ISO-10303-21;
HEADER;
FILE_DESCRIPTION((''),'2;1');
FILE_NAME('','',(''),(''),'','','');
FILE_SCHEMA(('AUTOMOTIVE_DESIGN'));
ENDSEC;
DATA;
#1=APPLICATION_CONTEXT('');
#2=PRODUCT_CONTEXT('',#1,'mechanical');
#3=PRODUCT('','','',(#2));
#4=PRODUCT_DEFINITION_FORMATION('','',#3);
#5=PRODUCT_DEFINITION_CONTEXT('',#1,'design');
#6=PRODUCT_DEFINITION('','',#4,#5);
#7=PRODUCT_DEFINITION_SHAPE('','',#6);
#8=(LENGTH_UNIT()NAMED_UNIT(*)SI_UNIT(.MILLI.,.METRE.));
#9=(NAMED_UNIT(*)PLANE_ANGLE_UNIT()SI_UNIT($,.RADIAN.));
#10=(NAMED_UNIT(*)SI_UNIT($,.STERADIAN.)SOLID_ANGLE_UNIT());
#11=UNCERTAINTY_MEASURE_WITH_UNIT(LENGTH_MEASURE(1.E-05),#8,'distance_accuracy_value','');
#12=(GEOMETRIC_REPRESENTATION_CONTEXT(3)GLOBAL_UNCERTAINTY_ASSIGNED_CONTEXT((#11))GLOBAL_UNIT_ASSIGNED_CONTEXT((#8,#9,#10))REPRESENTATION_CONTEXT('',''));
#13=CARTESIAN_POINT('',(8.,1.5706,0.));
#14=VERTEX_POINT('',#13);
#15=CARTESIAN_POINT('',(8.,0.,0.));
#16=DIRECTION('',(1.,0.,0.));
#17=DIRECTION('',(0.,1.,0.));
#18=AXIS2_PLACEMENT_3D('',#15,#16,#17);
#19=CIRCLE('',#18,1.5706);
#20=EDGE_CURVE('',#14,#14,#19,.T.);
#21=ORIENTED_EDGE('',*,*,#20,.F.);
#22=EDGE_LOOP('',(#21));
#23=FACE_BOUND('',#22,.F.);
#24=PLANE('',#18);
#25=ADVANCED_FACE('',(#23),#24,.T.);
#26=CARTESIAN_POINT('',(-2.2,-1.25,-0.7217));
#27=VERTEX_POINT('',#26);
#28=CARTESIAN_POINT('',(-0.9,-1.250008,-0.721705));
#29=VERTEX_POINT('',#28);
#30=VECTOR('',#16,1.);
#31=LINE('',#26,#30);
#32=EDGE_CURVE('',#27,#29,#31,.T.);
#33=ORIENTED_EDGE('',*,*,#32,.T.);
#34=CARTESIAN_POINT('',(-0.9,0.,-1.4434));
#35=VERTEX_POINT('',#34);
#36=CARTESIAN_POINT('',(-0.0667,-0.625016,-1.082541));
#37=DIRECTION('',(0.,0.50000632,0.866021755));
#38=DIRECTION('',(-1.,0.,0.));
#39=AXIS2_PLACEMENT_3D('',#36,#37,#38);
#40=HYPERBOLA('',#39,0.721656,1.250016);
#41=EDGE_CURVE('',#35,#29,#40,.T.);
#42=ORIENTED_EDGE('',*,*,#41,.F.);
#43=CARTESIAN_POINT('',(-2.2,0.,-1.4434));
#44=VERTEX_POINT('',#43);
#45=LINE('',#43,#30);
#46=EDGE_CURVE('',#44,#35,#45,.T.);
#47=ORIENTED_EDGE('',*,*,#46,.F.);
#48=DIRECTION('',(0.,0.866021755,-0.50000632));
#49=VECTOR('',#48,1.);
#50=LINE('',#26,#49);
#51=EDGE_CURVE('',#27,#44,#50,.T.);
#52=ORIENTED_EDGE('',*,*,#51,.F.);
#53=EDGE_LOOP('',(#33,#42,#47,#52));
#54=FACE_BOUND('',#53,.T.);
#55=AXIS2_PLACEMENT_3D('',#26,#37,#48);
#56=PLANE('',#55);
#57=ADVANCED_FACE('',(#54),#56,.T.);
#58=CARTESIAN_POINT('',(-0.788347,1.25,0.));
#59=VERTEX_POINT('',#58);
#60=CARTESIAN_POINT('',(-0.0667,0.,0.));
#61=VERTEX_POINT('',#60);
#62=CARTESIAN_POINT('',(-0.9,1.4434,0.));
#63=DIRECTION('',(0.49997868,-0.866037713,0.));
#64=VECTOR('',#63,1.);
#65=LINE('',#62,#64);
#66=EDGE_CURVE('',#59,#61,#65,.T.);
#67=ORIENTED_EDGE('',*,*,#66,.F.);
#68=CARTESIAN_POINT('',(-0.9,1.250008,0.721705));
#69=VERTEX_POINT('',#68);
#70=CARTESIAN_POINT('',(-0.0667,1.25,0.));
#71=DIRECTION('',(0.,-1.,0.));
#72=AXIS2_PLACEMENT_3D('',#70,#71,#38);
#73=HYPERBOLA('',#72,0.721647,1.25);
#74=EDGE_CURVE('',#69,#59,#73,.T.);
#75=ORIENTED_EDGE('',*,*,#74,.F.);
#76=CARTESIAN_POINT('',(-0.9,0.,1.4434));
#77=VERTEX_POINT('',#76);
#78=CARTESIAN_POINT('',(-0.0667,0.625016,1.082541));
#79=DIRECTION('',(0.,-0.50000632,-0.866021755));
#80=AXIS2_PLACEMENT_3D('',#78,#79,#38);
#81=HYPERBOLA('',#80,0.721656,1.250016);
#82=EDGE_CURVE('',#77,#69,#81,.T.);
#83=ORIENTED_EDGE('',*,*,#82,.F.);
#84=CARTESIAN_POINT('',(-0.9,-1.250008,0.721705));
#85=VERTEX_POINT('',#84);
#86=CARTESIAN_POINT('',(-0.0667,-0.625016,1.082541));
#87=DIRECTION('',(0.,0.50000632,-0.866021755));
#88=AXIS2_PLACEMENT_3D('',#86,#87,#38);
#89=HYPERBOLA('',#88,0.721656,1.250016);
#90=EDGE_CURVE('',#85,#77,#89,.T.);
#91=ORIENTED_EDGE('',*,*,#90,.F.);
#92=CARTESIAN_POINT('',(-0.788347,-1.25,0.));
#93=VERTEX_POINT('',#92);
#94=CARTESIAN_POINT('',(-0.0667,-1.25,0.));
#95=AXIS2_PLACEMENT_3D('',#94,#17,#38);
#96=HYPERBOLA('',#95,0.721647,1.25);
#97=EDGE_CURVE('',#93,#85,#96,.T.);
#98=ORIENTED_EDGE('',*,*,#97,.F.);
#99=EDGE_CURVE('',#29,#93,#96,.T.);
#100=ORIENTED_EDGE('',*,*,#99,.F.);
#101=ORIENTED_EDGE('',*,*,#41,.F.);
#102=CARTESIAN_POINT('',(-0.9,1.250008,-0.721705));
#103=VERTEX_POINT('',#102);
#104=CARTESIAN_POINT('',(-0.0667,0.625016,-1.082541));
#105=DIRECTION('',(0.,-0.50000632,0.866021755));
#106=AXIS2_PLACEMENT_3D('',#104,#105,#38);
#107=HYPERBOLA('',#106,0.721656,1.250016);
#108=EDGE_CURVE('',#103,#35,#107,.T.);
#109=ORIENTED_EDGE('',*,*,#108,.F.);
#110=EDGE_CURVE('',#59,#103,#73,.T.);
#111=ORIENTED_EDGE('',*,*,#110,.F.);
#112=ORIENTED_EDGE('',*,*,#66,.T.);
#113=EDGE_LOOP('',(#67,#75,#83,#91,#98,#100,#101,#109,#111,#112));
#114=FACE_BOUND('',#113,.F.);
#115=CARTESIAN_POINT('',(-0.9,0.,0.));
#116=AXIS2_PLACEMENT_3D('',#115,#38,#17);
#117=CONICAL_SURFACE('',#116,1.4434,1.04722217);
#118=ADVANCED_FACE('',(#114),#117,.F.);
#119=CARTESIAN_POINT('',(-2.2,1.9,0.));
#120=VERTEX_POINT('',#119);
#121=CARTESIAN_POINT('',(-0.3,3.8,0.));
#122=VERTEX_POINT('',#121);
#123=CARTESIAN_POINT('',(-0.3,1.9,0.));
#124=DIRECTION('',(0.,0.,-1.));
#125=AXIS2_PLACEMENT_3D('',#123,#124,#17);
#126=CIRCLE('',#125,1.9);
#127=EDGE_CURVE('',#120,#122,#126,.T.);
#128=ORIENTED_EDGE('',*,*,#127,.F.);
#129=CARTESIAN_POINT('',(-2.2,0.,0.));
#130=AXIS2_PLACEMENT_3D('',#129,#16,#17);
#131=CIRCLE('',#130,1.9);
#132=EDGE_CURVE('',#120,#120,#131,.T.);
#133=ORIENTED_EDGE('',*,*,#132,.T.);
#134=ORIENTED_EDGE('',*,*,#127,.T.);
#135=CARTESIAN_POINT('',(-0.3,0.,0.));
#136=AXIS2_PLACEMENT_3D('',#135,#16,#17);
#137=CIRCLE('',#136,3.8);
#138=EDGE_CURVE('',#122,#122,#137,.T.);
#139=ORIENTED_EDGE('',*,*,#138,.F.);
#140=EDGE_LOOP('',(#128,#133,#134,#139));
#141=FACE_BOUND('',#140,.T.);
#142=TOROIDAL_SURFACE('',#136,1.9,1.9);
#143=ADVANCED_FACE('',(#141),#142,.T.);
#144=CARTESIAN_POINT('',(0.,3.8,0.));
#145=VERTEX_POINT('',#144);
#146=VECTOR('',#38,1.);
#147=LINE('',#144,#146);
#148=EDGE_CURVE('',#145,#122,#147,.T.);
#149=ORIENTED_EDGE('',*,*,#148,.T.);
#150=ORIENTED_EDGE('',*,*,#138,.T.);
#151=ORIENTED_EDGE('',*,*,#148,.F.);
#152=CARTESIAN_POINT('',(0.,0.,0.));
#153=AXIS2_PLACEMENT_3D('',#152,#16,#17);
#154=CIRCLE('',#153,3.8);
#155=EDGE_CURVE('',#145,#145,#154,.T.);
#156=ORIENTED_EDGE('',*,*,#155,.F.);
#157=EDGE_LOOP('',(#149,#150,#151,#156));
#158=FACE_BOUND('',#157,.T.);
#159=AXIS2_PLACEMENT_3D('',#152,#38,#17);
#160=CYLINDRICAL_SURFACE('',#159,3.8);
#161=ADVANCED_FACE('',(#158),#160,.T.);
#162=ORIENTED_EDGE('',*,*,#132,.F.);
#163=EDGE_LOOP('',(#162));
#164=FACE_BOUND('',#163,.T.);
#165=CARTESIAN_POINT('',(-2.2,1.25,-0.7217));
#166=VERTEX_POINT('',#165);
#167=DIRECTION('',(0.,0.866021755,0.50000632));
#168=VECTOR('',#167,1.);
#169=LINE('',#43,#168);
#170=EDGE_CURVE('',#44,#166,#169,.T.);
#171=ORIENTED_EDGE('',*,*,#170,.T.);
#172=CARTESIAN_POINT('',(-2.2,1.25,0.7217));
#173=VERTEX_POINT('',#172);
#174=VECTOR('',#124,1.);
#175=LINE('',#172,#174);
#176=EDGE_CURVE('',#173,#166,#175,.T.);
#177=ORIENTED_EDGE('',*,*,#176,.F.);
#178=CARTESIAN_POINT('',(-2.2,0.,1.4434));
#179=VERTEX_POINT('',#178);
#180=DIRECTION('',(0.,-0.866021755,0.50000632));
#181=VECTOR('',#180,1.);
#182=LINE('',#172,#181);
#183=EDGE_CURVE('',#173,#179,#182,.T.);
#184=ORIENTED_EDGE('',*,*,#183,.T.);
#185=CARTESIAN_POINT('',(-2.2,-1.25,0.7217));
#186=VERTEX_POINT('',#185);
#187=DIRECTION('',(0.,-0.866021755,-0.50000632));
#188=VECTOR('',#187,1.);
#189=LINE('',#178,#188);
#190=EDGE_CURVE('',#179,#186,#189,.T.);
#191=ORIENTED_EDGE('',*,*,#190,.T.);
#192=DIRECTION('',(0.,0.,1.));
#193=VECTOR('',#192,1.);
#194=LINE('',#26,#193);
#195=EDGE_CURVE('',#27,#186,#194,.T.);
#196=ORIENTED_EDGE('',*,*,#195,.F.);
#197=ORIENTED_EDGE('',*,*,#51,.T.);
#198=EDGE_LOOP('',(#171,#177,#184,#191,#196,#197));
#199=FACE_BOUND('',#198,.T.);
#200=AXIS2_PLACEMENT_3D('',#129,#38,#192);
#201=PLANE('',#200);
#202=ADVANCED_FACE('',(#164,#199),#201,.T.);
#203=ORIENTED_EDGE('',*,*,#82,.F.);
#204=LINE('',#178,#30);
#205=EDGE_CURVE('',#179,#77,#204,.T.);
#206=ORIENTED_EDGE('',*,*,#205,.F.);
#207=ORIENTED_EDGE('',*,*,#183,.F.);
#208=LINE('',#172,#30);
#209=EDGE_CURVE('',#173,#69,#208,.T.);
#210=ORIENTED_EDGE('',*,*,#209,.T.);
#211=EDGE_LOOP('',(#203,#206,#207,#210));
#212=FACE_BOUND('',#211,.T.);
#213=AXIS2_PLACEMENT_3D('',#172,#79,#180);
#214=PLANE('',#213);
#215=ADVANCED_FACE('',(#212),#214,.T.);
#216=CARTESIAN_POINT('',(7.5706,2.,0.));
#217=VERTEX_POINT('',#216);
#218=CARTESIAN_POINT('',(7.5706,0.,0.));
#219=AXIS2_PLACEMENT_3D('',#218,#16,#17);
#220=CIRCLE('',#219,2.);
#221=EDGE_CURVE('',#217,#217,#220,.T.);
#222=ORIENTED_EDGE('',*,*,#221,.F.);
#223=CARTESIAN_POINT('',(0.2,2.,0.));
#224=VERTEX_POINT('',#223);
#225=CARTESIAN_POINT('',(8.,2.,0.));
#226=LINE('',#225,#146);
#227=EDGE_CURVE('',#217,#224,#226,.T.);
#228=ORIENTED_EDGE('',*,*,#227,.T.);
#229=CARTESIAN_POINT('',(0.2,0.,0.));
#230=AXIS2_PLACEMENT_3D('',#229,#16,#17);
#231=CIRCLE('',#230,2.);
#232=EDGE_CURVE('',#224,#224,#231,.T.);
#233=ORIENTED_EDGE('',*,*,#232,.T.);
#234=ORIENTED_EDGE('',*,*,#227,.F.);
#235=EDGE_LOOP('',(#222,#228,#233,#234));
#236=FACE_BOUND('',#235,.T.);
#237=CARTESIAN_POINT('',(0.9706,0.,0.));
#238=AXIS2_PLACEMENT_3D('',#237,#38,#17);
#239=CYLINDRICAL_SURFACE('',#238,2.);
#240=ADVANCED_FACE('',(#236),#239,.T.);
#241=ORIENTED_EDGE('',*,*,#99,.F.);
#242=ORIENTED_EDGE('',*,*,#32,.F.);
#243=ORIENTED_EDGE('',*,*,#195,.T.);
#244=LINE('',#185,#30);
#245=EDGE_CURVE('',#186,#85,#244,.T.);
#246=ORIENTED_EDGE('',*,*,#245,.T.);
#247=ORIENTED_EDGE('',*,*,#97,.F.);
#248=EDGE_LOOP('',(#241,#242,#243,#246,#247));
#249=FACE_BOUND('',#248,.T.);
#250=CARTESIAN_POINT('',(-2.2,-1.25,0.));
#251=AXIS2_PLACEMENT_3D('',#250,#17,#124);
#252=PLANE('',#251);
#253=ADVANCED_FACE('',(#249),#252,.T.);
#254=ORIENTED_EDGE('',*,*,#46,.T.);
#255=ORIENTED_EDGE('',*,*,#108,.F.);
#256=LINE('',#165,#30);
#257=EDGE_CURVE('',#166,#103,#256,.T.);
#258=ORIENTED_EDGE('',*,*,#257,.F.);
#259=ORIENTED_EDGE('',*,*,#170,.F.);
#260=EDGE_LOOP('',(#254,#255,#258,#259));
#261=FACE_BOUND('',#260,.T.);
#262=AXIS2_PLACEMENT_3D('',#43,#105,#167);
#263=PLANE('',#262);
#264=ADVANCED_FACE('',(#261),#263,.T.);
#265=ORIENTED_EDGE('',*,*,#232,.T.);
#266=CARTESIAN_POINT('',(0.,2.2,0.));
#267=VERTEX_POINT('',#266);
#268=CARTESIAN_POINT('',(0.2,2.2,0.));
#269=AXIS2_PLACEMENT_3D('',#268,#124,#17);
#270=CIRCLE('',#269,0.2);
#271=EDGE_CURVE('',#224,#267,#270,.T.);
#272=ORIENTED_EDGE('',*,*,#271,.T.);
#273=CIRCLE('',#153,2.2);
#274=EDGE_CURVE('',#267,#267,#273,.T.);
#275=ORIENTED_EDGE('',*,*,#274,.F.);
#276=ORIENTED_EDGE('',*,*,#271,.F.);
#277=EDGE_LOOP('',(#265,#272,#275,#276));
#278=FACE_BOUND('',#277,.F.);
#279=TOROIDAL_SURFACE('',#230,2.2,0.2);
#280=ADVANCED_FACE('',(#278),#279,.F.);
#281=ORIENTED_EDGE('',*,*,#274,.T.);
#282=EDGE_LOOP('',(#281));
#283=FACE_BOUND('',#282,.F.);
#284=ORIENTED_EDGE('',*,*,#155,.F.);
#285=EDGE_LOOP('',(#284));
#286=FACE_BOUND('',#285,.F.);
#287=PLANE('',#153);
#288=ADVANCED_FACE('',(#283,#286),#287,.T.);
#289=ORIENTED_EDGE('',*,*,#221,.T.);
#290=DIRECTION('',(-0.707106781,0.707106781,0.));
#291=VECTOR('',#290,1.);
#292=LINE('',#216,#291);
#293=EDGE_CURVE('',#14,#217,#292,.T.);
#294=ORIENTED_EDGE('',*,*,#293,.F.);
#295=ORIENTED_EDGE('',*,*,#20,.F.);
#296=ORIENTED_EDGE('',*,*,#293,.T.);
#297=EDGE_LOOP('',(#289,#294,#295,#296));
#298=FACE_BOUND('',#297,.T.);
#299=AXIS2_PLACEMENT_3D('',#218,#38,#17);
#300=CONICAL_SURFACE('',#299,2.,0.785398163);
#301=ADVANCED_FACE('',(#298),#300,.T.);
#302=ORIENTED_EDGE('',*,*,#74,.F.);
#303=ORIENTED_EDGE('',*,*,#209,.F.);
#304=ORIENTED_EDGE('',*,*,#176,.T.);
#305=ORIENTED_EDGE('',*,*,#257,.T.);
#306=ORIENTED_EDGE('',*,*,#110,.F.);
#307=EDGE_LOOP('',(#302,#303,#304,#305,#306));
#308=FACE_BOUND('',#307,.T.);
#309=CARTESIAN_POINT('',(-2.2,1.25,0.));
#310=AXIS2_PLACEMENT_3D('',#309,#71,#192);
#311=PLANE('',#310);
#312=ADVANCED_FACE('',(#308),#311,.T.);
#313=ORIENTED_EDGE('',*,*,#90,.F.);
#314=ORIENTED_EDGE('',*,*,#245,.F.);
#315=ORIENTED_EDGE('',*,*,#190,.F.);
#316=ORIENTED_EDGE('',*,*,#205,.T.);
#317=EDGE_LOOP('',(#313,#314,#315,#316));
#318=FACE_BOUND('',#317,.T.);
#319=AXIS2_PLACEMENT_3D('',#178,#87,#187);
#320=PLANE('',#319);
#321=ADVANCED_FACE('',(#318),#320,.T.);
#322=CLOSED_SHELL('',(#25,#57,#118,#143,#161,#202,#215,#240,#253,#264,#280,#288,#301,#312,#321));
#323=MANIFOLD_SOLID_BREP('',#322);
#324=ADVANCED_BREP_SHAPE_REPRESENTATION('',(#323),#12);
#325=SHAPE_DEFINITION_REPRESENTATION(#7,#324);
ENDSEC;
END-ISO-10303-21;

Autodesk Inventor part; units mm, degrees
ref_plane "YZ Plane" through (0, 0, 0) normal (1, 0, 0) x (0, 1, 0)
ref_plane "XZ Plane" through (0, 0, 0) normal (0, 1, 0) x (-1, 0, 0)
sketch "Sketch1" plane through (0, 0, 0) normal (0, 0, 1) x (1, 0, 0)
  line L0 (-0.0667, 0) -> (8, 0)
  line L1 (8, 0) -> (8, 2)
  line L2 (8, 2) -> (1.4, 2)
  line L3 (1.4, 2) -> (0.9706, 2)
  line L4 (0.9706, 2) -> (0, 2)
  line L5 (0, 2) -> (0, 3.8)
  line L6 (0, 3.8) -> (-2.2, 3.8)
  line L7 (-2.2, 3.8) -> (-2.2, 1.4434)
  line L8 (-2.2, 1.4434) -> (-0.9, 1.4434)
  line L9 (-0.9, 1.4434) -> (-0.0667, 0)
  line L10 (-4.24, 0) -> (10.04, 0) projected
  line L11 (0, -0.76) -> (0, 4.56) projected
  line L12 (1.4, 2) -> (0, 2) construction
  dimension "d0" = 6.6
  dimension "d1" = 0.4294
  dimension "d2" = 2.2
  dimension "d3" = 1.3
  dimension "d4" = 60
  dimension "d5" = 4
  dimension "d6" = 4
  dimension "d7" = 2.8868
  dimension "d8" = 7.6
  dimension "d19" = 8
revolve "Body" add sketch "Sketch1" angle 360 about axis through (-0.0667, 0, 0) along (1, 0, 0)
sketch "Sketch2" plane through (-2.2, 0, 0) normal (-1, 0, 0) x (0, 0, 1)
  circle A0 centre (0, 0) radius 1.4434 projected
  line L0 (0, -5.32) -> (0, 5.32) projected
  line L1 (-5.32, 0) -> (5.32, 0) projected
  line L2 (1.4434, 0) -> (0.7217, -1.25)
  line L3 (0.7217, -1.25) -> (-0.7217, -1.25)
  line L4 (-0.7217, -1.25) -> (-1.4434, 0)
  line L5 (-1.4434, 0) -> (-0.7217, 1.25)
  line L6 (-0.7217, 1.25) -> (0.7217, 1.25)
  line L7 (0.7217, 1.25) -> (1.4434, 0)
  point P0 (0, 0)
extrude "Slot" add sketch "Sketch2" against normal up to next contours L7 A0 | A0 L2 | L6 L0 A0 | A0 L0 L3 | L0 L6 A0 | A0 L3 L0 | L4 A0 | A0 L5
fillet "Fillet1" radius 1.9 1 edges at (-2.2, -3.8, 0)
thread "Thread" size "M4x0.7" class "4g6g" standard "ANSI Metric M Profile" length 6.6
chamfer "Chamfer1" distance 0.4294 distance2 0.4294 1 edges at (8, -2, 0) measured on face at (8, 0.556, 0.0273)
fillet "Fillet2" radius 0.2 1 edges at (0, -2, 0)
ref_plane "Work Plane1" through (30, 0, 0) normal (0, -0.5, 0.8660254) x (1, 0, 0)
equation "\"d0\" = GEL"
equation "\"d1\" = GAL"
equation "\"d2\" = KOH"
equation "\"d3\" = INTI"
equation "\"d5\" = GD"
equation "\"d6\" = BDM"
equation "\"d7\" = 1.1547 * SW"
equation "\"d8\" = KOD"
equation "\"d19\" = NLG"
equation "\"d16\" = RR"
equation "\"d12\" = GEL"
equation "\"d14\" = -0.5 * SPD + 0.5 * GD"
equation "\"d15\" = GUL"
equation "\"d29\" = R"
equation "\"GD\" = NND"
equation "\"NLG\" = 8"
equation "\"GEL\" = 6.6"
equation "\"KOD\" = 7.6"
equation "\"KOH\" = 2.2"
equation "\"INTI\" = 1.3"
equation "\"GAL\" = 0.61345 * PTC"
equation "\"GUL\" = 0.61345 * PTC"
equation "\"BDM\" = NND"
equation "\"SW\" = 2.5"
equation "\"RR\" = 1.9"
equation "\"SPD\" = 3.14117"
equation "\"d28\" = R"
equation "\"R\" = 0.2"
equation "\"TOA\" = 30deg"
equation "\"THREADDIA\" = 4"
equation "\"KOD1\" = KOD - 2 * RR"
equation "\"PTC\" = 0.7"
equation "\"NND\" = 4"
equation "\"E0\" = 1.155 * SW"
equation "\"GD1\" = THREADDIA - 1.2269 * PTC"
properties part number "ANSI B18.3.4M - M4 x 0.7 x 8, BHSBHCSM" material "Steel, Mild"
